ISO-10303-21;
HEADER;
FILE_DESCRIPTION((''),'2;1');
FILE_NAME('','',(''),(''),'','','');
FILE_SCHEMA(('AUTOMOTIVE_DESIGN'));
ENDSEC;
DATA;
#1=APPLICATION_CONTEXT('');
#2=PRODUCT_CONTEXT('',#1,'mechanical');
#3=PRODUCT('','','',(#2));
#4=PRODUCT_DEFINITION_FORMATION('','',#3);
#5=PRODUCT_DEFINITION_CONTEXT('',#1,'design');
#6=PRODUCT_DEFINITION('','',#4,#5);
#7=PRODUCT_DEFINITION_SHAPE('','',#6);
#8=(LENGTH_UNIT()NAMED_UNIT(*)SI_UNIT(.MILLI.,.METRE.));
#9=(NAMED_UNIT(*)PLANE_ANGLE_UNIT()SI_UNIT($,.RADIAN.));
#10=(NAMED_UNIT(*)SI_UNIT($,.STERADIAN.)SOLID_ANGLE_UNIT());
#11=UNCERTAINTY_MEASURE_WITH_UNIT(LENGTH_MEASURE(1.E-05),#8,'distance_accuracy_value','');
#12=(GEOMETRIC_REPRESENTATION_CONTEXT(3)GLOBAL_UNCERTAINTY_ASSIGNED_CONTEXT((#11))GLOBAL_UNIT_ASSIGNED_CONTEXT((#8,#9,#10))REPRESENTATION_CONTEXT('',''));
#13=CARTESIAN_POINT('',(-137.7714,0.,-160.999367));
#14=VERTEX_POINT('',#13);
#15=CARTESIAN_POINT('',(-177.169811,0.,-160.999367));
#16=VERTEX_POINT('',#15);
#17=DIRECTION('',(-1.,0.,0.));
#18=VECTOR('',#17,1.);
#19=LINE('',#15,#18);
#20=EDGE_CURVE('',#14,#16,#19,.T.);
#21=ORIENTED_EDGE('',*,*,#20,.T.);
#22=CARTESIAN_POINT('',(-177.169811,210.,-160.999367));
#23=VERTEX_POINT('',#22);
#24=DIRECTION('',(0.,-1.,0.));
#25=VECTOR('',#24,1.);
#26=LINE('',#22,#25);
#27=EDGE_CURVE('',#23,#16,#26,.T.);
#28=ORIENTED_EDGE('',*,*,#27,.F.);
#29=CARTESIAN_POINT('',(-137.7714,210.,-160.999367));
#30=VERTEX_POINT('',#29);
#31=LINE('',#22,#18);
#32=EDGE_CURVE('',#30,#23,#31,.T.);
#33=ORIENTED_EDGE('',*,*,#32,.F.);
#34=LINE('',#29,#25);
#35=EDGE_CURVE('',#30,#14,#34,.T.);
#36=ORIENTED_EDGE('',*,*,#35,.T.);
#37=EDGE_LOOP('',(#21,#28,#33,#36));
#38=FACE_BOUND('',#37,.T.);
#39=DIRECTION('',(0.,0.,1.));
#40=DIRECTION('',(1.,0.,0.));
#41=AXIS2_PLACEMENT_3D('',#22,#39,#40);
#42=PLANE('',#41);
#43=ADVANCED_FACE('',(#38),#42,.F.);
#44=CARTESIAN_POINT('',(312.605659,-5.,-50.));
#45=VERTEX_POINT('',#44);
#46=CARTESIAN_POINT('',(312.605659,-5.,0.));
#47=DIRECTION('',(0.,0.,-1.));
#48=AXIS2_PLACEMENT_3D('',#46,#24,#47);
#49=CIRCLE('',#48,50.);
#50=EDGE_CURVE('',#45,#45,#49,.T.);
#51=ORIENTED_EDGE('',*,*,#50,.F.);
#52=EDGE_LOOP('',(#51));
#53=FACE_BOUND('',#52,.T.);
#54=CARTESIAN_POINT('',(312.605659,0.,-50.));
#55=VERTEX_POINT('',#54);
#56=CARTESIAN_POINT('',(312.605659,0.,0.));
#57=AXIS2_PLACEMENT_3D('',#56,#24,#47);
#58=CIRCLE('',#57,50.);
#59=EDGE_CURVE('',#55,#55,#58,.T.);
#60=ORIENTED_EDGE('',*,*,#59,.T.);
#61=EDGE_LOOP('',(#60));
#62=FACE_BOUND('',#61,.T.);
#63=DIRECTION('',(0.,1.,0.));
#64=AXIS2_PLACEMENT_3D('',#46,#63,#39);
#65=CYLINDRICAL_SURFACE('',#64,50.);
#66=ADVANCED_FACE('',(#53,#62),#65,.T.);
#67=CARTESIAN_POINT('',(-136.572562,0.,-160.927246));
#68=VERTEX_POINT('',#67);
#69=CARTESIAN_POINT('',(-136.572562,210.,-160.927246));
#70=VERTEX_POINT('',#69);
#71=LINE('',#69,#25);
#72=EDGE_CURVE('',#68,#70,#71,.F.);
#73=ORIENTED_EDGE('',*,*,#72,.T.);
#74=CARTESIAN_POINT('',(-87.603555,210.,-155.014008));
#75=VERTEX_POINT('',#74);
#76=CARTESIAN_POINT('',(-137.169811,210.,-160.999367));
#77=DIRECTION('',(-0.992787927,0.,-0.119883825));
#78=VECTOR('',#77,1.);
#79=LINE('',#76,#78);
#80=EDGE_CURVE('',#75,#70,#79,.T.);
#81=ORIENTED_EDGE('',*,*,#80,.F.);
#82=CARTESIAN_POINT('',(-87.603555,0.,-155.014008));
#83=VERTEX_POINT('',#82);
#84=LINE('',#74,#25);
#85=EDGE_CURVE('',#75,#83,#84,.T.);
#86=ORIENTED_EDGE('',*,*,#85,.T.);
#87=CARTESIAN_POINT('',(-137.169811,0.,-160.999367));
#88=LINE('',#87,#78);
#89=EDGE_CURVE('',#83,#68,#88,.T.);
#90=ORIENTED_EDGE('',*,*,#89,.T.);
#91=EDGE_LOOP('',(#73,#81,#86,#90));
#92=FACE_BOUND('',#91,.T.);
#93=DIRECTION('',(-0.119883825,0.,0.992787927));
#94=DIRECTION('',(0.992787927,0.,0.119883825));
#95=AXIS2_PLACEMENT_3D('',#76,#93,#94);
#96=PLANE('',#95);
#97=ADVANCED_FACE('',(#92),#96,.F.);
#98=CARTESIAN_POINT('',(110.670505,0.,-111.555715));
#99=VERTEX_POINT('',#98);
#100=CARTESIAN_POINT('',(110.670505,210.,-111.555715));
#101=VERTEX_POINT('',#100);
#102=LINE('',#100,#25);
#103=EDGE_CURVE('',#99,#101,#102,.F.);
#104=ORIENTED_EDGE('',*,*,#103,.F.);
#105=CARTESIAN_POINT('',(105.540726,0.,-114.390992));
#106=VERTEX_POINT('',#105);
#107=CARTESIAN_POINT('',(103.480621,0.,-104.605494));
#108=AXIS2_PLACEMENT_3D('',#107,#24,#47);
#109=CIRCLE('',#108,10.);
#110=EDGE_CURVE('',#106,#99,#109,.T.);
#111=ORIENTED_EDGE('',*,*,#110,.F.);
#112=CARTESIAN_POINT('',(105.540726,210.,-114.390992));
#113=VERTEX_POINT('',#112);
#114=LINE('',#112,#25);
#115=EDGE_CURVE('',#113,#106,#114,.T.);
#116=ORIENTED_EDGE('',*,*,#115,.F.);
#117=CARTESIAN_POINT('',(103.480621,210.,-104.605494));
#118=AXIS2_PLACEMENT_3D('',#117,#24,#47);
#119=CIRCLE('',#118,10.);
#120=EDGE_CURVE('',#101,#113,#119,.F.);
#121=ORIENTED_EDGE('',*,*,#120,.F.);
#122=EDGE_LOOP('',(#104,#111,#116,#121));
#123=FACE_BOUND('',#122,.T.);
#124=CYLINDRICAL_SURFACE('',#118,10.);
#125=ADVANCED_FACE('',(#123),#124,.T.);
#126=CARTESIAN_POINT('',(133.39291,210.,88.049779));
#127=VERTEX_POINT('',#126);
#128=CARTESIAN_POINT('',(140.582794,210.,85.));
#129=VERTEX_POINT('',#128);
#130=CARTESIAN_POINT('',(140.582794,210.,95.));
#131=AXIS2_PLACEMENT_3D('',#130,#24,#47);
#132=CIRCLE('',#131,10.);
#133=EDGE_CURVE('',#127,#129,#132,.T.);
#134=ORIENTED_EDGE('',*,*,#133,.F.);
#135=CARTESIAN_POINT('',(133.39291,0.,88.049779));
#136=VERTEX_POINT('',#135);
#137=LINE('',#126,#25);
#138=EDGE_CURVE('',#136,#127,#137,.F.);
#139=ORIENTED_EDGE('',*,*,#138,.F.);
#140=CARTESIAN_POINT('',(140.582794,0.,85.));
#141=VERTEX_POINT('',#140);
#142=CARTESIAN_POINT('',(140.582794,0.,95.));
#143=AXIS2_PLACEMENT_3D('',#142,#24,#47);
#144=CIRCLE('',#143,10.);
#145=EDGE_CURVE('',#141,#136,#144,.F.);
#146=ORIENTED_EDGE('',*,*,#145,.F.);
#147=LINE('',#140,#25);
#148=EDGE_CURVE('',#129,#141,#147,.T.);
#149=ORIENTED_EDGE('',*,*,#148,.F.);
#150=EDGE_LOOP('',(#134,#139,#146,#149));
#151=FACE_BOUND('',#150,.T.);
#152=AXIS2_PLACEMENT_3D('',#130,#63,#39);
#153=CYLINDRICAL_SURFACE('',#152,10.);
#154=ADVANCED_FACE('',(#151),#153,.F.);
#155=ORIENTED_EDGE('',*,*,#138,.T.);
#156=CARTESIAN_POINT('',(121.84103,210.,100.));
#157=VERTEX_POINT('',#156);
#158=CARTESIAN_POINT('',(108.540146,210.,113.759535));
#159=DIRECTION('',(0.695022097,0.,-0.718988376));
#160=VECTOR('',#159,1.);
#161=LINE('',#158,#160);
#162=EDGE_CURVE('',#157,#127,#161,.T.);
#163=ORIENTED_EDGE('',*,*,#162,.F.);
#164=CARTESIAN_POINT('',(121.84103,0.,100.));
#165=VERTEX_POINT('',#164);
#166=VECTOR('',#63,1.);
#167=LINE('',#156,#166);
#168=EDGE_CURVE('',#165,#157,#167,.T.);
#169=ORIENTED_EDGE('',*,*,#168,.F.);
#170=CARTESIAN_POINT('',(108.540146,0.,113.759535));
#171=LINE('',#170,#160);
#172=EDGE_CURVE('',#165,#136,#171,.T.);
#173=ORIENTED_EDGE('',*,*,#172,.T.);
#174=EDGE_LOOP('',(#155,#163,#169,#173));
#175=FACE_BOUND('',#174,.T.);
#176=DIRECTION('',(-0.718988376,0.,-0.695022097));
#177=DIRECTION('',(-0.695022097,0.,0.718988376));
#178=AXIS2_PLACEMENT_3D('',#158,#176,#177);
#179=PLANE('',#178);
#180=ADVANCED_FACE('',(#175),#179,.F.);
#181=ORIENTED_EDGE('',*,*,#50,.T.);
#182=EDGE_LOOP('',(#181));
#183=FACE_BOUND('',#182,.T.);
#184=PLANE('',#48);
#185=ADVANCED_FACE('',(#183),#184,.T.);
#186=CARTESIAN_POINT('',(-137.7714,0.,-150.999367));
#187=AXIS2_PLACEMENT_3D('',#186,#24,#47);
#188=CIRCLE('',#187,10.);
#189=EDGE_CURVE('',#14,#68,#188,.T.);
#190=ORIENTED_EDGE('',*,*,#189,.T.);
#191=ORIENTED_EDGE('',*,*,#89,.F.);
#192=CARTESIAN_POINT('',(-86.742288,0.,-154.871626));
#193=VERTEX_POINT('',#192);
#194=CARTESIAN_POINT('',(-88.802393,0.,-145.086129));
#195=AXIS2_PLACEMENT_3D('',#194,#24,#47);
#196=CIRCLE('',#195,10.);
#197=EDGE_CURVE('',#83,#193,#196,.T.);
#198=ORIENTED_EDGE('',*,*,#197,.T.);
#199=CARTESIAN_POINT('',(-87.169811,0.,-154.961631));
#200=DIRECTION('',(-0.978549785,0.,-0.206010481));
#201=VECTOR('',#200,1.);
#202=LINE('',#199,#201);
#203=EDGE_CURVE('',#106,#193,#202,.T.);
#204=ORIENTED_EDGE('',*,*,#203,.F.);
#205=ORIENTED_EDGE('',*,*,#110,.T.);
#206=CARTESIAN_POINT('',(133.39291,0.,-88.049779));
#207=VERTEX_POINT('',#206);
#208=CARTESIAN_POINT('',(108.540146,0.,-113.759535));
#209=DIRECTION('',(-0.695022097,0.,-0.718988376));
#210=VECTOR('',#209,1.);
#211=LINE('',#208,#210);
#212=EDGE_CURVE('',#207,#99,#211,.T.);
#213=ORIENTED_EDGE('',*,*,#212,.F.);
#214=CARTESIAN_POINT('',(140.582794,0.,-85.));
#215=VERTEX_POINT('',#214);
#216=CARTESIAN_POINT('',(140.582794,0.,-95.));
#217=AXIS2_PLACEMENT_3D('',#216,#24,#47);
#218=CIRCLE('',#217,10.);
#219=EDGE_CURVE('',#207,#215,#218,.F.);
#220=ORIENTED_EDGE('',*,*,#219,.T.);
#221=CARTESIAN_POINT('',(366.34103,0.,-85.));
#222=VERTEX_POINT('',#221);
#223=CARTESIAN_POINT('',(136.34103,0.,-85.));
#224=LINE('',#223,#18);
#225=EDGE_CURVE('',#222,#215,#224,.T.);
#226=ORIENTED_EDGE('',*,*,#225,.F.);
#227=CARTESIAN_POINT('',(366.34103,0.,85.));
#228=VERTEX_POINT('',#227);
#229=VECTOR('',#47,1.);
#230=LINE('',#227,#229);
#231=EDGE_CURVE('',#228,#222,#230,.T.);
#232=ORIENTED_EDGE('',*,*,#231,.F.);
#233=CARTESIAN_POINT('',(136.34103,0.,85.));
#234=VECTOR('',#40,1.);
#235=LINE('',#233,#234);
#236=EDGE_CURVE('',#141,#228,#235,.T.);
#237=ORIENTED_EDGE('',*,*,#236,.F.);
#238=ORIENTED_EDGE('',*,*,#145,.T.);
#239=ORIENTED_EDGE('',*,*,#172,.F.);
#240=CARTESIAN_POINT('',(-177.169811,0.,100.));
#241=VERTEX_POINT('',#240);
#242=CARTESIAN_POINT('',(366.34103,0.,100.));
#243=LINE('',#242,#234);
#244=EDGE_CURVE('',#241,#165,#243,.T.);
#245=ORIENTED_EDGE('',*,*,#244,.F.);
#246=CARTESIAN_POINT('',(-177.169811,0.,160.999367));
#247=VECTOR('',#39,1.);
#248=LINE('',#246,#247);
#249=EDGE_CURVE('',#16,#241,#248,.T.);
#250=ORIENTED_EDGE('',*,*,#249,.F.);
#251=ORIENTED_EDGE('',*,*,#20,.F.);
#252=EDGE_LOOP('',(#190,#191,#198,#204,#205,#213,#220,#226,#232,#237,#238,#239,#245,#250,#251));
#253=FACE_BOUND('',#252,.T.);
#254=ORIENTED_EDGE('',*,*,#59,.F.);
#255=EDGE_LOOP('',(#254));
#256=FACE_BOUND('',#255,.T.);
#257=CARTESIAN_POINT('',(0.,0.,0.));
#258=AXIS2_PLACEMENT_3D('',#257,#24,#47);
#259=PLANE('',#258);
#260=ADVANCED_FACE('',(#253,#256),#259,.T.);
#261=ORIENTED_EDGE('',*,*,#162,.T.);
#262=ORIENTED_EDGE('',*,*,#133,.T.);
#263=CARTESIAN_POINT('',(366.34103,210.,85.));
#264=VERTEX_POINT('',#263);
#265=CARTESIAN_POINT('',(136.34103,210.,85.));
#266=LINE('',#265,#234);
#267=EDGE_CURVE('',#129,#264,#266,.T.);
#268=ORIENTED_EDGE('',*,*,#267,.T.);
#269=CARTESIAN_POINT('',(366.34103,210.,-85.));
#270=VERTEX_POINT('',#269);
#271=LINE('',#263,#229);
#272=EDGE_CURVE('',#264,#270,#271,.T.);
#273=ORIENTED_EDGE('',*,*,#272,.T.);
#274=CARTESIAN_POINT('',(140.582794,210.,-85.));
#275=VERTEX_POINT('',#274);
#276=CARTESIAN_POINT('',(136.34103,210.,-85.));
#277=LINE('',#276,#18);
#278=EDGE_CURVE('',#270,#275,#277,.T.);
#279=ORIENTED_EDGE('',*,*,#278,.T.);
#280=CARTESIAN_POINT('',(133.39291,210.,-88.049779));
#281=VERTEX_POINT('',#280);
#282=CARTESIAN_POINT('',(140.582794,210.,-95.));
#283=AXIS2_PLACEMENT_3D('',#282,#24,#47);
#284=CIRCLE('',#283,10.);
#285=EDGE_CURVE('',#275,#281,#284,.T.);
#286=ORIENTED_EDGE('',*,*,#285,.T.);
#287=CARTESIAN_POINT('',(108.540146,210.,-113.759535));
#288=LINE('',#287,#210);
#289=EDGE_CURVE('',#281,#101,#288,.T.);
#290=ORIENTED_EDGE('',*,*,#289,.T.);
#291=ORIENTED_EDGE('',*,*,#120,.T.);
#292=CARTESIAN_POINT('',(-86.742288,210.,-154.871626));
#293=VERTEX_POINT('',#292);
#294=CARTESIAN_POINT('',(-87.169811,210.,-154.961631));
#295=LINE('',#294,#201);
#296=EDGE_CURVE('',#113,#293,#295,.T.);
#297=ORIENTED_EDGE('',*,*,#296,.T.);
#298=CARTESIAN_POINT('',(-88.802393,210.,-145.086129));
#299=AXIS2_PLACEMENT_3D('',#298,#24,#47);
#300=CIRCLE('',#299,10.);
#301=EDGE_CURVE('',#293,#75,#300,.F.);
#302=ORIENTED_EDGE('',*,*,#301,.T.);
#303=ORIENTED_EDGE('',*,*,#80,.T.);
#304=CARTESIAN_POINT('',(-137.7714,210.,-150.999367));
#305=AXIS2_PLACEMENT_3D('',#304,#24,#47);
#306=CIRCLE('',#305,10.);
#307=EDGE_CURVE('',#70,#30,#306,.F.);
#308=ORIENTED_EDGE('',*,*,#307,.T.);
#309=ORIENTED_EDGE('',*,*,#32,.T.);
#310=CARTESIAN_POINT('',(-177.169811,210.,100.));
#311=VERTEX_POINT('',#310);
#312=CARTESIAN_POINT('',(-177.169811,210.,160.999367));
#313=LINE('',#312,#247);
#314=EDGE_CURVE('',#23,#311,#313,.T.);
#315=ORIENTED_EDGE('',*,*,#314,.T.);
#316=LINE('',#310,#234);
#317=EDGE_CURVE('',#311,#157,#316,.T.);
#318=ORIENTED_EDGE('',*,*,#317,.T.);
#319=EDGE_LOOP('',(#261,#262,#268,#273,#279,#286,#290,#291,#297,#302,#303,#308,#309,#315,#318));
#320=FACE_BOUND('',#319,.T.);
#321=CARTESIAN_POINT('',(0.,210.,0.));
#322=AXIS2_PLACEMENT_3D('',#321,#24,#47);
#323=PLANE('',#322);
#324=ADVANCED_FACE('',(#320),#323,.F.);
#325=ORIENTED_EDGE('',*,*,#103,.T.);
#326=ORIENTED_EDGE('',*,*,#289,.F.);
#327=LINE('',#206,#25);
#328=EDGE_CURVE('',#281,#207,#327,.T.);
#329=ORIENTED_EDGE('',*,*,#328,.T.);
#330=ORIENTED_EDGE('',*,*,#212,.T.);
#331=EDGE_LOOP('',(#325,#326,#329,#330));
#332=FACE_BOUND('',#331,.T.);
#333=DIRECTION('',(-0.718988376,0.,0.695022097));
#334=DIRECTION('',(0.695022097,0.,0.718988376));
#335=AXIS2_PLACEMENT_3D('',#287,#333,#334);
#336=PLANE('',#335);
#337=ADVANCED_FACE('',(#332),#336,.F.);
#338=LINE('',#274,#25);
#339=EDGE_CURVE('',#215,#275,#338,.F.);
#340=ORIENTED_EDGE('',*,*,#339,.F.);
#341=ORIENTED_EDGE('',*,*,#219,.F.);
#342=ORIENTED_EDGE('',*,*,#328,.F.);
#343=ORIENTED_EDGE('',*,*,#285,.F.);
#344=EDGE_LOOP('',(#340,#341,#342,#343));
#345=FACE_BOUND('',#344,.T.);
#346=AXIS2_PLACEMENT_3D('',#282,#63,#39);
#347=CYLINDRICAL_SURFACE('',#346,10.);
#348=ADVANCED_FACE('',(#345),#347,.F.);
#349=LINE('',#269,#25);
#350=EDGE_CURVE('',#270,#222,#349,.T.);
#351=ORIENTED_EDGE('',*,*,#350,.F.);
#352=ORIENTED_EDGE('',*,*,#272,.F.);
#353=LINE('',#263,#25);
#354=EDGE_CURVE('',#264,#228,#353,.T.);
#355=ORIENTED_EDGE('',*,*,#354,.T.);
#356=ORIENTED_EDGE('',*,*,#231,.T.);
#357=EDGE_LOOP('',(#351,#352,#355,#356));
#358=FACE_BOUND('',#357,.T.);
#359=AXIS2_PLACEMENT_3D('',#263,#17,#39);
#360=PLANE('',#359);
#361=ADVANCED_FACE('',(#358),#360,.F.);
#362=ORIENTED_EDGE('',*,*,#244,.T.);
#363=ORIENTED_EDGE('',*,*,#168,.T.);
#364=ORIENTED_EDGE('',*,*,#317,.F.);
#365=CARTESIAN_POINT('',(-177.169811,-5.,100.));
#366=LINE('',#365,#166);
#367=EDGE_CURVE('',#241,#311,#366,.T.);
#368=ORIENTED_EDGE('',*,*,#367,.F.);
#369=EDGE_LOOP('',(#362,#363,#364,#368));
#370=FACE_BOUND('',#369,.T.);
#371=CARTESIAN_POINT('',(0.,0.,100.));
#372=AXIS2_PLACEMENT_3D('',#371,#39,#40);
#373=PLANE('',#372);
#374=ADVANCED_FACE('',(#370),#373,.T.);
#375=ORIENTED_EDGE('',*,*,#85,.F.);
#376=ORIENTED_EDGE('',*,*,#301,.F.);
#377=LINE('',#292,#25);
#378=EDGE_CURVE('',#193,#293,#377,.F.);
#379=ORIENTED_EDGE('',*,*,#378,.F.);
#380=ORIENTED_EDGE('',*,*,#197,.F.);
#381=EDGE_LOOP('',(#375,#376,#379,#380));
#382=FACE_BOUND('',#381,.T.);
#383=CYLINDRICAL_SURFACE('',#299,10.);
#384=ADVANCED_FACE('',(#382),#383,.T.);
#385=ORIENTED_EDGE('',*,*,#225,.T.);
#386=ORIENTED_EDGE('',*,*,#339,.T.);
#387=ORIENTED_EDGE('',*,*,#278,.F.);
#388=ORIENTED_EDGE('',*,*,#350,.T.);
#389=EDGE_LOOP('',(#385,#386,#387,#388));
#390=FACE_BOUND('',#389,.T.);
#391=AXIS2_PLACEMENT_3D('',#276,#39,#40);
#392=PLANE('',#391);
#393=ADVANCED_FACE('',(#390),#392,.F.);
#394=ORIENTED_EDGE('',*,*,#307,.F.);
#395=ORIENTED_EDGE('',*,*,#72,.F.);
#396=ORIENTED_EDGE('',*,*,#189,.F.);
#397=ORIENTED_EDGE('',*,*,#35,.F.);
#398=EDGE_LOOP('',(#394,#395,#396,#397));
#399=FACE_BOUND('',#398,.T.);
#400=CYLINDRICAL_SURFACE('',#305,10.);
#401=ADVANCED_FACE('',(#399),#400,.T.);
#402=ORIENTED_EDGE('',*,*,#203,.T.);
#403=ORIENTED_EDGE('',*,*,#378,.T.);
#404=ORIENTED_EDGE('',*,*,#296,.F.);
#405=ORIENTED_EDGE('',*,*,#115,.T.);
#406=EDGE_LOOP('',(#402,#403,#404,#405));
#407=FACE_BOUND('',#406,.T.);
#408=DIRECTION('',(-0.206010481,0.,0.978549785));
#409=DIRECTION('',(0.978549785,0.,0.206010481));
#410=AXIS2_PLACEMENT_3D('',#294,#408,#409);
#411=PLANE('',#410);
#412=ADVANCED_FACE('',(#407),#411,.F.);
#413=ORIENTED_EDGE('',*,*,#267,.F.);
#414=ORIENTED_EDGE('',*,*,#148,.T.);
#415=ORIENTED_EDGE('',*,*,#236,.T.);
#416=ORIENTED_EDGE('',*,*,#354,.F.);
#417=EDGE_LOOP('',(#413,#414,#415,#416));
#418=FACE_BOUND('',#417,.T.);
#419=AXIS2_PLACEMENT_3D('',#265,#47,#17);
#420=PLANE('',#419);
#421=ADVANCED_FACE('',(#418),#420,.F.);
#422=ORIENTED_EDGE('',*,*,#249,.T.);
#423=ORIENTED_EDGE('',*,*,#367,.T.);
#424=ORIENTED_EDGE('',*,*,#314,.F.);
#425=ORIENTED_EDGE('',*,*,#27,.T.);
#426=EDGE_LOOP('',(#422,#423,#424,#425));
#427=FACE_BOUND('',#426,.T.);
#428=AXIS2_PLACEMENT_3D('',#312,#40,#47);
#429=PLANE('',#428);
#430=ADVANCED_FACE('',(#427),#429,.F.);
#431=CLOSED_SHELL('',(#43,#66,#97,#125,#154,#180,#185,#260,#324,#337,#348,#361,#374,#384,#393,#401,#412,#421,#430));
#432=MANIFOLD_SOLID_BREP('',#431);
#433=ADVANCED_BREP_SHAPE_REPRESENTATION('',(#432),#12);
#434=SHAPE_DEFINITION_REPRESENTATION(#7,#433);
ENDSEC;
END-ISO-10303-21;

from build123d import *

# Parameters (mm, degrees)
BOSS_EXTRUDE1_DEPTH     = 210
CUT_EXTRUDE1_DEPTH      = 60
FILLET1_R               = 10
FILLET2_R               = 10
SKETCH3_R               = 50
BOSS_EXTRUDE2_DEPTH     = 5
CUT_EXTRUDE2_DEPTH      = 452.914312828
CUT_EXTRUDE2_DEPTH_BACK = 452.914312828
SKETCH4_W               = 303.312029478
SKETCH4_H               = 103.575222475


with BuildPart() as part:
    # Sketch1 → Boss-Extrude1 (new body)
    with BuildSketch(Plane(origin=(0, 0, 0), x_dir=(1, 0, 0), z_dir=(0, 1, 0))):
        Polygon((-177.169811321, 160.999367101), (-137.169811321, 160.999367101), (-87.169811321, 154.961631252), (108.540145677, 113.759535042), (136.34102955, 85), (366.34102955, 85), (366.34102955, -85), (136.34102955, -85), (108.540145677, -113.759535042), (-87.169811321, -154.961631252), (-137.169811321, -160.999367101), (-177.169811321, -160.999367101), align=None)
    extrude(amount=BOSS_EXTRUDE1_DEPTH)

    # Sketch2 → Cut-Extrude1 (cut)
    with BuildSketch(Plane.XY.offset(160)):
        Polygon((-177.169811321, 0), (366.34102955, 145), (366.34102955, 0), align=None)
    extrude(amount=-CUT_EXTRUDE1_DEPTH, mode=Mode.SUBTRACT)

    # Fillet1
    # the kernel refuses this fillet: 10 mm, written as the material it adds along each edge
    with BuildSketch(Plane(origin=(136.34102955, 0, 85), x_dir=(-0.6950220968474797, 0, 0.7189883760491075), z_dir=(0, 1, 0))) as fillet1_piece_1:
        with BuildLine():
            CenterArc((FILLET1_R * 0.424176403002, FILLET1_R), FILLET1_R, 224.028978069, 45.971021931)
            Line((-FILLET1_R * 0.294811973047, FILLET1_R * 0.304977903153), (0, 0))
            Line((0, 0), (FILLET1_R * 0.424176403002, 0))
        make_face()
    extrude(amount=210)
    # the kernel refuses this fillet: 10 mm, written as the material it takes off along each edge
    with BuildSketch(Plane(origin=(108.540145677, 68.559927222, 113.759535042), x_dir=(0.6950220968474767, 0, -0.7189883760491101), z_dir=(0, 1, 0))) as fillet1_2_piece_1:
        with BuildLine():
            CenterArc((FILLET1_R * 0.306516798333, FILLET1_R), FILLET1_R, 235.917636109, 34.082363891)
            Line((-FILLET1_R * 0.253867285946, FILLET1_R * 0.17176713535), (0, 0))
            Line((0, 0), (FILLET1_R * 0.306516798333, 0))
        make_face()
    extrude(amount=149.102992736, mode=Mode.SUBTRACT)
    with BuildSketch(Plane(origin=(-87.169811321, 22.918324442, 154.961631252), x_dir=(0.9785497849867442, 0, -0.20601048104986486), z_dir=(0, 1, 0))) as fillet1_2_piece_2:
        with BuildLine():
            CenterArc((FILLET1_R * 0.0436894476987, FILLET1_R), FILLET1_R, 264.996739811, 5.003260189)
            Line((-FILLET1_R * 0.0435229794225, FILLET1_R * 0.00381026277338), (0, 0))
            Line((0, 0), (FILLET1_R * 0.0436894476986, 0))
        make_face()
    extrude(amount=188.173911751, mode=Mode.SUBTRACT)
    with BuildSketch(Plane(origin=(-137.169811321, -1.50397119, 160.999367101), x_dir=(-1, 0, 0), z_dir=(0, 1, 0))) as fillet1_2_piece_3:
        with BuildLine():
            CenterArc((FILLET1_R * 0.0601588475808, -FILLET1_R), FILLET1_R, 90, 6.88539785)
            Line((-FILLET1_R * 0.0597249775946, -FILLET1_R * 0.00721207276614), (0, 0))
            Line((0, 0), (FILLET1_R * 0.0601588475808, 0))
        make_face()
    extrude(amount=213.007942379, mode=Mode.SUBTRACT)

    # Fillet2
    # the kernel refuses this fillet: 10 mm, written as the material it adds along each edge
    with BuildSketch(Plane(origin=(136.34102955, 0, -85), x_dir=(-0.695022096847478, 0, -0.7189883760491093), z_dir=(0, 1, 0))) as fillet2_piece_1:
        with BuildLine():
            CenterArc((FILLET2_R * 0.424176403002, -FILLET2_R), FILLET2_R, 90, 45.971021931)
            Line((-FILLET2_R * 0.294811973047, -FILLET2_R * 0.304977903153), (0, 0))
            Line((0, 0), (FILLET2_R * 0.424176403002, 0))
        make_face()
    extrude(amount=210)
    # the kernel refuses this fillet: 10 mm, written as the material it takes off along each edge
    with BuildSketch(Plane(origin=(-137.169811321, -1.50397119, -160.999367101), x_dir=(-1, 0, 0), z_dir=(0, 1, 0))) as fillet2_2_piece_1:
        with BuildLine():
            CenterArc((FILLET2_R * 0.0601588475808, FILLET2_R), FILLET2_R, 263.11460215, 6.88539785)
            Line((-FILLET2_R * 0.0597249775946, FILLET2_R * 0.00721207276614), (0, 0))
            Line((0, 0), (FILLET2_R * 0.0601588475808, 0))
        make_face()
    extrude(amount=213.007942379, mode=Mode.SUBTRACT)
    with BuildSketch(Plane(origin=(-87.169811321, -1.092236192, -154.961631252), x_dir=(-0.9927879272338658, 0, -0.11988382517539375), z_dir=(0, 1, 0))) as fillet2_2_piece_2:
        with BuildLine():
            CenterArc((FILLET2_R * 0.0436894476987, FILLET2_R), FILLET2_R, 264.996739811, 5.003260189)
            Line((-FILLET2_R * 0.0435229794225, FILLET2_R * 0.00381026277338), (0, 0))
            Line((0, 0), (FILLET2_R * 0.0436894476986, 0))
        make_face()
    extrude(amount=212.184472385, mode=Mode.SUBTRACT)
    with BuildSketch(Plane(origin=(108.540145677, -7.662919958, -113.759535042), x_dir=(-0.9785497849867494, 0, -0.20601048104984027), z_dir=(0, 1, 0))) as fillet2_2_piece_3:
        with BuildLine():
            CenterArc((FILLET2_R * 0.306516798333, FILLET2_R), FILLET2_R, 235.917636109, 34.082363891)
            Line((-FILLET2_R * 0.253867285946, FILLET2_R * 0.17176713535), (0, 0))
            Line((0, 0), (FILLET2_R * 0.306516798333, 0))
        make_face()
    extrude(amount=225.325839917, mode=Mode.SUBTRACT)

    # Sketch3 → Boss-Extrude2 (add)
    with BuildSketch(Plane.XZ):
        with Locations(Location((312.605658758, 0, 0), (0, 0, 270))):
            Circle(SKETCH3_R)
    extrude(amount=BOSS_EXTRUDE2_DEPTH)

    # Sketch4 → Cut-Extrude2 (cut, two sides: drawn at the far end of the back side and taken through both)
    with BuildSketch(Plane.XZ.offset(-CUT_EXTRUDE2_DEPTH_BACK)):
        with Locations((-25.513796582, 151.787611238)):
            Rectangle(SKETCH4_W, SKETCH4_H)
    extrude(amount=CUT_EXTRUDE2_DEPTH + CUT_EXTRUDE2_DEPTH_BACK, mode=Mode.SUBTRACT)


solid = part.part
